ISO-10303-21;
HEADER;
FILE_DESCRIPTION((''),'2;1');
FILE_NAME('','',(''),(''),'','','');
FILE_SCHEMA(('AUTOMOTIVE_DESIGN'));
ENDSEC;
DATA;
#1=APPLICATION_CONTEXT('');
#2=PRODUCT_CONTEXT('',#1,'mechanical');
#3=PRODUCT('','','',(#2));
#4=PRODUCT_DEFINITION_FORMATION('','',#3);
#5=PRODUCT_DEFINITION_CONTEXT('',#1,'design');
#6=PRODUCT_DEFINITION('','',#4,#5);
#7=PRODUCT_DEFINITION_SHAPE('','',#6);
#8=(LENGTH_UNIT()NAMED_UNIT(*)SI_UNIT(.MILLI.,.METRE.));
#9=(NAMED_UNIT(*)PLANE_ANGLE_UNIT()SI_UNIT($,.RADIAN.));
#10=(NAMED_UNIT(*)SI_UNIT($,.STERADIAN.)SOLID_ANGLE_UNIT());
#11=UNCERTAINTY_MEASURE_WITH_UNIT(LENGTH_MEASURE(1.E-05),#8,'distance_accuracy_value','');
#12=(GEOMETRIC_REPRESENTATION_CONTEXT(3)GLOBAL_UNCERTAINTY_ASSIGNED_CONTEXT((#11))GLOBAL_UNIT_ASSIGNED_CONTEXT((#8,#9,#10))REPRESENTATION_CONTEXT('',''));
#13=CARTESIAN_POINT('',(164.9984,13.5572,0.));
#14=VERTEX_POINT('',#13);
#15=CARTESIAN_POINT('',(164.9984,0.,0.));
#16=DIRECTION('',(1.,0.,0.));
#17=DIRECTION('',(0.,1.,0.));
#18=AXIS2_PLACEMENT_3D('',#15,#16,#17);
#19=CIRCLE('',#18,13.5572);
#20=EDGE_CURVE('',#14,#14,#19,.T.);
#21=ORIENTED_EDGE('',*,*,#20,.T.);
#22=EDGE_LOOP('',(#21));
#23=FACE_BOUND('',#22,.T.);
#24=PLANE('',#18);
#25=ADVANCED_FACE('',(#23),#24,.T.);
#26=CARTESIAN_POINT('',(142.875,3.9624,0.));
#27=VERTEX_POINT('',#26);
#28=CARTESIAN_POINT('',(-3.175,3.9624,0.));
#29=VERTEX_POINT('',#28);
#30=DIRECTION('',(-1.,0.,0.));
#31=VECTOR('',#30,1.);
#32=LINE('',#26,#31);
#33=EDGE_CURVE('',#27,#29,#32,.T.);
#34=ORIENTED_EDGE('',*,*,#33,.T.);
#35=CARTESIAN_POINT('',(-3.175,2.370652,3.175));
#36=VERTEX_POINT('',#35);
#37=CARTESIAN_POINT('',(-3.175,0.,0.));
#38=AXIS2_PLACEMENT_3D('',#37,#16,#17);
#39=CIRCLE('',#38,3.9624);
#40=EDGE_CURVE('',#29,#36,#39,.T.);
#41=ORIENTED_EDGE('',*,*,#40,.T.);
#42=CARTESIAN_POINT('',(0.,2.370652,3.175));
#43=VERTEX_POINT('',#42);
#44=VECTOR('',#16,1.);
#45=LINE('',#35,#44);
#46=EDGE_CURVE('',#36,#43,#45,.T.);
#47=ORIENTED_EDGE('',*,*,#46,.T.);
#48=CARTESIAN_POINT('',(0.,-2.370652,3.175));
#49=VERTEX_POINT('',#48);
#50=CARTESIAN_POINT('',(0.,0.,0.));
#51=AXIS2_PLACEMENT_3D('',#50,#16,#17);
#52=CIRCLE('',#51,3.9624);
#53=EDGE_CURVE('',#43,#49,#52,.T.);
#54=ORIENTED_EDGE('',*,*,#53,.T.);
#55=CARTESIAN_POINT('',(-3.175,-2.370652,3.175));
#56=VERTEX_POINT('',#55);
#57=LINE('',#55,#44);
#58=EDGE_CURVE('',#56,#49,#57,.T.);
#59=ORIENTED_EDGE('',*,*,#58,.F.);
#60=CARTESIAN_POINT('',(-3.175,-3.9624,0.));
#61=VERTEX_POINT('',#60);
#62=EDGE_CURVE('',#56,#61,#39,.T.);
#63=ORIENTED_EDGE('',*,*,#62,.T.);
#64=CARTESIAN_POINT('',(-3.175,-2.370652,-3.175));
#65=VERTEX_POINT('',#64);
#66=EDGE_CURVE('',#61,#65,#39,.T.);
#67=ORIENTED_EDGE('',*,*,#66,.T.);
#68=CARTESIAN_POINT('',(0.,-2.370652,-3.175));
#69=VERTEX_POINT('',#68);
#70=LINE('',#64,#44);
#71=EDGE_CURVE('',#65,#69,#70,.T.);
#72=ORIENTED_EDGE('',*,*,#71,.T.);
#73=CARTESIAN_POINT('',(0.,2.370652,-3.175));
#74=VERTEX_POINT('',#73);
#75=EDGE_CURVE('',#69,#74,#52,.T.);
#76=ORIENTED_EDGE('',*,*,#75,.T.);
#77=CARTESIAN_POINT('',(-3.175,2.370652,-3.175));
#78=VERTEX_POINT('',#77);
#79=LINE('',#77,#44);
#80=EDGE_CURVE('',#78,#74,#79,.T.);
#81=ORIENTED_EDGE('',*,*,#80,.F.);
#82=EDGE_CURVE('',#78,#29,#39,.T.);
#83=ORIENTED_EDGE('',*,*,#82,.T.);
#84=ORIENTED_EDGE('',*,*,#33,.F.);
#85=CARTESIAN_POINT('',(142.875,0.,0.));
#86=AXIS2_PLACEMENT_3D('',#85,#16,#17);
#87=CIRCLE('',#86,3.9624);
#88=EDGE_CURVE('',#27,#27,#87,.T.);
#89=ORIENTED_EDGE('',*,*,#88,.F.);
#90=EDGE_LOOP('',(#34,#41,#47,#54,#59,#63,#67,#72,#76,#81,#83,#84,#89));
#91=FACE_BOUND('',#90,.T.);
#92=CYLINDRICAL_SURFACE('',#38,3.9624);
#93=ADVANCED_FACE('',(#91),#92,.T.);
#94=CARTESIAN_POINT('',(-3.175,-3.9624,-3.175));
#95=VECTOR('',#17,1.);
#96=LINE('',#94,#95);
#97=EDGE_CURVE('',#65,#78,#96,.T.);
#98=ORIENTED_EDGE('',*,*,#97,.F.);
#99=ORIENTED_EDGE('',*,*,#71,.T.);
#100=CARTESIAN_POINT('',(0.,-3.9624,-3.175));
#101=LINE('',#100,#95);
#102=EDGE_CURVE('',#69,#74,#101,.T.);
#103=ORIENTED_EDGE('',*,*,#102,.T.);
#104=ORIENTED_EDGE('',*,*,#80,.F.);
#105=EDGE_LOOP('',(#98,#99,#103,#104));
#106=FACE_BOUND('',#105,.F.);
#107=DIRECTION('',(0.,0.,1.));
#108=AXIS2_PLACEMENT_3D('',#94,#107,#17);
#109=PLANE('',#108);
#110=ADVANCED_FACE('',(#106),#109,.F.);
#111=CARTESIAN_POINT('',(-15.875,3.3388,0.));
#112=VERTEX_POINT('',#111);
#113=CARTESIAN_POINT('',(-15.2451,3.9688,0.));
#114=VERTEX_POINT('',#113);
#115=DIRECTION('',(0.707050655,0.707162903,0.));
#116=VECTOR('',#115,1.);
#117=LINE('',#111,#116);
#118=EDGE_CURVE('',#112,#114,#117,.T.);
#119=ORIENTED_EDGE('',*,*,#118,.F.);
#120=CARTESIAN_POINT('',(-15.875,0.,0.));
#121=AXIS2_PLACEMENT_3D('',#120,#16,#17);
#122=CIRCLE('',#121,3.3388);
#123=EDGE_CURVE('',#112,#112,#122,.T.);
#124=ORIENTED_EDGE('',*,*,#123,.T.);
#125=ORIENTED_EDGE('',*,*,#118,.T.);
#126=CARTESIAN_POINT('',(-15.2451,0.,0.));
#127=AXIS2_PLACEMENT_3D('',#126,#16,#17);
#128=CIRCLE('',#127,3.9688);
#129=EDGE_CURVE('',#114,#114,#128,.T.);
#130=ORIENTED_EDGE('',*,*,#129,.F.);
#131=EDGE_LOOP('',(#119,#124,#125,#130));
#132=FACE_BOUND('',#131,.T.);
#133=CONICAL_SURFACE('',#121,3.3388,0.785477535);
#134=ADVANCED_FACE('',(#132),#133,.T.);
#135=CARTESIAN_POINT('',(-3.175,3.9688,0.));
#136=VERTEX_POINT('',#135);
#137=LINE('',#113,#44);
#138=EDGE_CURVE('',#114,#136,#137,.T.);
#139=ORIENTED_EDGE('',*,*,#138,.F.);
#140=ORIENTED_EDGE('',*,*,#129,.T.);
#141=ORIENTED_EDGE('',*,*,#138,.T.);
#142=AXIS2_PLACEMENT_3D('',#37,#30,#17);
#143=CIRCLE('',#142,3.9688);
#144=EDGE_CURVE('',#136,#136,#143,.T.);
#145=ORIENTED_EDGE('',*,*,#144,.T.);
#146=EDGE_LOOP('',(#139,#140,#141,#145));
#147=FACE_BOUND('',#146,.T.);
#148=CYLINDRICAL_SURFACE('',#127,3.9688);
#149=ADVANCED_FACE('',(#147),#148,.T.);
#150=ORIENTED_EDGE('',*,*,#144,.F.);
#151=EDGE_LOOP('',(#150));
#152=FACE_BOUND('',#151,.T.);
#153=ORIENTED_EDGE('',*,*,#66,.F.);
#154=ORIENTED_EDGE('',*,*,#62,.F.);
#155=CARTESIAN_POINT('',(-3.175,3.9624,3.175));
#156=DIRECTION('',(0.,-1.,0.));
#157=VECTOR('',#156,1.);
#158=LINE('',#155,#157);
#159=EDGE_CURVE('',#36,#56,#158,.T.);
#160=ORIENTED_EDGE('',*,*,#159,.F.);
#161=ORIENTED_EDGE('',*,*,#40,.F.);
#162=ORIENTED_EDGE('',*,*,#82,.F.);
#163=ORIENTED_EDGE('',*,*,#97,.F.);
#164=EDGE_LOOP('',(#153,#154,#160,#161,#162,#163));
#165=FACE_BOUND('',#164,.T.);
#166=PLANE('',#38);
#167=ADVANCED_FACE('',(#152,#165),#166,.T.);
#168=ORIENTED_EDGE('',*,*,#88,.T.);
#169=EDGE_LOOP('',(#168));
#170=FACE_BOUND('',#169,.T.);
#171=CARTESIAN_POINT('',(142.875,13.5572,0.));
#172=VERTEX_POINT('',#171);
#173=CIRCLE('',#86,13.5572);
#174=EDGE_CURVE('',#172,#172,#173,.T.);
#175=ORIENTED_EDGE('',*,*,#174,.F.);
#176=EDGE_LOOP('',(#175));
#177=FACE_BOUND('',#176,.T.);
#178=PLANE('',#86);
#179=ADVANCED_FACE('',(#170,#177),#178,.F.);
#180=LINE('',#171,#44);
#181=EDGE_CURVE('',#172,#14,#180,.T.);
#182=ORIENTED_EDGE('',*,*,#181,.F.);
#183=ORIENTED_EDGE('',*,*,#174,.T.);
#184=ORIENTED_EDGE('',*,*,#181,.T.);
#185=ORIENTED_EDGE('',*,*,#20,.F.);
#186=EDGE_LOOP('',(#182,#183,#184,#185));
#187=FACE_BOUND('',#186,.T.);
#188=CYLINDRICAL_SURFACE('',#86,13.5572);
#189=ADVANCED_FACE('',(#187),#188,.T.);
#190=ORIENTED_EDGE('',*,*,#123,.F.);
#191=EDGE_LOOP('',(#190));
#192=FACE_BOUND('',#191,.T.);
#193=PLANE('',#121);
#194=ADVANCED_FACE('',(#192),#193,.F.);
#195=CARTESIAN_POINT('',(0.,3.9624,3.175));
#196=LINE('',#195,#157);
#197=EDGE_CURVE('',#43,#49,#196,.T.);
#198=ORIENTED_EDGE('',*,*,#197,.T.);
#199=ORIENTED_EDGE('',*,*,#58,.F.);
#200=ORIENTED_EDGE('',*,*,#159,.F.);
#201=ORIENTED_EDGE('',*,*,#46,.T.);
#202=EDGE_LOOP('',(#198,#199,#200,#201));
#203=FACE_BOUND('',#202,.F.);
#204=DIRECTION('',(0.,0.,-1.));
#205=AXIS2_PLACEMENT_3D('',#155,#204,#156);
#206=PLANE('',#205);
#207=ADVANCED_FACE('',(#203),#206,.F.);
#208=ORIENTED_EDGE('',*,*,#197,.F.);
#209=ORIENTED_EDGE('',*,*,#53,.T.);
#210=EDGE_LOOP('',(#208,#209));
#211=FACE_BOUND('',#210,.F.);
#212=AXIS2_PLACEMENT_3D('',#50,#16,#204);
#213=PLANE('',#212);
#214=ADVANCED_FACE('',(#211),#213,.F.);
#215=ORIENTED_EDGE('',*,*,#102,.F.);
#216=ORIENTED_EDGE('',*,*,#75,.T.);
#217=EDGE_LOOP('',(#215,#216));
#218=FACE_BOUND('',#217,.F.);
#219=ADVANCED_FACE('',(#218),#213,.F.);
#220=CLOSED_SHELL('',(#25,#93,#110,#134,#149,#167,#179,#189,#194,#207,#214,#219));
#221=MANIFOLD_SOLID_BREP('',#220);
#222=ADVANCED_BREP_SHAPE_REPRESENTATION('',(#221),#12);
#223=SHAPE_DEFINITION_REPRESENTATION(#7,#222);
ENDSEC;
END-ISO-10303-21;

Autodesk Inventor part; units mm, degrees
sketch "Sketch_1" plane through (0, 0, 0) normal (0, 0, 1) x (1, 0, 0)
  line L0 (164.9984, 0) -> (-3.175, 0)
  line L1 (-3.175, 0) -> (-3.175, 3.9624)
  line L2 (-3.175, 3.9624) -> (142.875, 3.9624)
  line L3 (142.875, 3.9624) -> (142.875, 13.5572)
  line L4 (142.875, 13.5572) -> (164.9984, 13.5572)
  line L5 (164.9984, 13.5572) -> (164.9984, 0)
  line L6 (164.9984, 0) -> (-3.175, 0)
revolve "Revolution1" add sketch "Sketch_1" angle 360 about axis through (164.9984, 0, 0) along (1, 0, 0)
sketch "Sketch_3" plane through (0, 0, 0) normal (0, 0, 1) x (1, 0, 0)
  line L0 (-3.175, 0) -> (-15.875, 0)
  line L1 (-15.875, 0) -> (-15.875, 3.3388)
  line L2 (-15.875, 3.3388) -> (-15.2451, 3.9688)
  line L3 (-15.2451, 3.9688) -> (-3.175, 3.9688)
  line L4 (-3.175, 3.9688) -> (-3.175, 0)
  line L5 (-3.175, 0) -> (-15.875, 0)
revolve "Revolution2" add sketch "Sketch_3" angle 360 about axis through (-3.175, 0, 0) along (1, 0, 0)
thread "Thread1" size "5/16-24 UNF" class "2A" standard "ANSI Unified Screw Threads" full length
sketch "Sketch_10" plane through (-3.175, 0, 0) normal (1, 0, 0) x (0, 0, -1)
  line L0 (-7.9248, -7.9248) -> (7.9248, -7.9248)
  line L1 (7.9248, -7.9248) -> (7.9248, 7.9248)
  line L2 (7.9248, 7.9248) -> (-7.9248, 7.9248)
  line L3 (-7.9248, 7.9248) -> (-7.9248, -7.9248)
  line L4 (-3.175, -3.9624) -> (3.175, -3.9624)
  line L5 (3.175, -3.9624) -> (3.175, 3.9624)
  line L6 (3.175, 3.9624) -> (-3.175, 3.9624)
  line L7 (-3.175, 3.9624) -> (-3.175, -3.9624)
extrude "Extrusion1" cut sketch "Sketch_10" along normal blind 3.175
ref_plane "dia1_XY" through (-3.175, 3.9624, 0) normal (1, 0, 0) x (0, 0, -1)
ref_plane "dia1_YZ" through (-3.175, 3.9624, 0) normal (0, 0, -1) x (0, 1, 0)
ref_plane "dia1_ZX" through (-3.175, 3.9624, 0) normal (0, 1, 0) x (1, 0, 0)
ref_plane "dia12_XY" through (0, 0, 14.1351) normal (1, 0, 0) x (0, 0, -1)
ref_plane "dia12_YZ" through (0, 0, 14.1351) normal (0, 0, -1) x (0, 1, 0)
ref_plane "dia12_ZX" through (0, 0, 14.1351) normal (0, 1, 0) x (1, 0, 0)
ref_plane "dia2_XY" through (-3.175, -3.9624, 0) normal (1, 0, 0) x (0, 0, -1)
ref_plane "dia2_YZ" through (-3.175, -3.9624, 0) normal (0, 0, -1) x (0, 1, 0)
ref_plane "dia2_ZX" through (-3.175, -3.9624, 0) normal (0, 1, 0) x (1, 0, 0)
ref_plane "dia22_XY" through (0, 0, -14.1351) normal (1, 0, 0) x (0, 0, -1)
ref_plane "dia22_YZ" through (0, 0, -14.1351) normal (0, 0, -1) x (0, 1, 0)
ref_plane "dia22_ZX" through (0, 0, -14.1351) normal (0, 1, 0) x (1, 0, 0)
ref_plane "rl1_XY" through (-15.875, 0, 0) normal (1, 0, 0) x (0, 0, -1)
ref_plane "rl1_YZ" through (-15.875, 0, 0) normal (0, 0, -1) x (0, 1, 0)
ref_plane "rl1_ZX" through (-15.875, 0, 0) normal (0, 1, 0) x (1, 0, 0)
ref_plane "rl2_XY" through (-3.175, 0, 0) normal (1, 0, 0) x (0, 0, -1)
ref_plane "rl2_YZ" through (-3.175, 0, 0) normal (0, 0, -1) x (0, 1, 0)
ref_plane "rl2_ZX" through (-3.175, 0, 0) normal (0, 1, 0) x (1, 0, 0)
ref_plane "rod_cp_XY" through (0, 0, 0) normal (1, 0, 0) x (0, 0, -1)
ref_plane "rod_cp_YZ" through (0, 0, 0) normal (0, 0, -1) x (0, 1, 0)
ref_plane "rod_cp_ZX" through (0, 0, 0) normal (0, 1, 0) x (1, 0, 0)
ref_plane "thd1_XY" through (-15.875, 3.9688, 0) normal (1, 0, 0) x (0, 0, -1)
ref_plane "thd1_YZ" through (-15.875, 3.9688, 0) normal (0, 0, -1) x (0, 1, 0)
ref_plane "thd1_ZX" through (-15.875, 3.9688, 0) normal (0, 1, 0) x (1, 0, 0)
ref_plane "thd2_XY" through (-15.875, -3.9688, 0) normal (1, 0, 0) x (0, 0, -1)
ref_plane "thd2_YZ" through (-15.875, -3.9688, 0) normal (0, 0, -1) x (0, 1, 0)
ref_plane "thd2_ZX" through (-15.875, -3.9688, 0) normal (0, 1, 0) x (1, 0, 0)
ref_plane "to_rod_clevis_XY" through (-20.701, 0, 0) normal (1, 0, 0) x (0, 0, -1)
ref_plane "to_rod_clevis_YZ" through (-20.701, 0, 0) normal (0, 0, -1) x (0, 1, 0)
ref_plane "to_rod_clevis_ZX" through (-20.701, 0, 0) normal (0, 1, 0) x (1, 0, 0)
ref_plane "wf1_XY" through (-3.175, 0, 0) normal (1, 0, 0) x (0, 0, -1)
ref_plane "wf1_YZ" through (-3.175, 0, 0) normal (0, 0, -1) x (0, 1, 0)
ref_plane "wf1_ZX" through (-3.175, 0, 0) normal (0, 1, 0) x (1, 0, 0)
ref_plane "wf2_XY" through (0, 0, 0) normal (1, 0, 0) x (0, 0, -1)
ref_plane "wf2_YZ" through (0, 0, 0) normal (0, 0, -1) x (0, 1, 0)
ref_plane "wf2_ZX" through (0, 0, 0) normal (0, 1, 0) x (1, 0, 0)
ref_plane "wfw1_XY" through (-3.175, 0, -3.175) normal (0, 1, 0) x (1, 0, 0)
ref_plane "wfw1_YZ" through (-3.175, 0, -3.175) normal (1, 0, 0) x (0, 0, -1)
ref_plane "wfw1_ZX" through (-3.175, 0, -3.175) normal (0, 0, -1) x (0, 1, 0)
ref_plane "wfw2_XY" through (-3.175, 0, 3.175) normal (0, 1, 0) x (1, 0, 0)
ref_plane "wfw2_YZ" through (-3.175, 0, 3.175) normal (1, 0, 0) x (0, 0, -1)
ref_plane "wfw2_ZX" through (-3.175, 0, 3.175) normal (0, 0, -1) x (0, 1, 0)
properties part number "C-094-DP0000_rod"
